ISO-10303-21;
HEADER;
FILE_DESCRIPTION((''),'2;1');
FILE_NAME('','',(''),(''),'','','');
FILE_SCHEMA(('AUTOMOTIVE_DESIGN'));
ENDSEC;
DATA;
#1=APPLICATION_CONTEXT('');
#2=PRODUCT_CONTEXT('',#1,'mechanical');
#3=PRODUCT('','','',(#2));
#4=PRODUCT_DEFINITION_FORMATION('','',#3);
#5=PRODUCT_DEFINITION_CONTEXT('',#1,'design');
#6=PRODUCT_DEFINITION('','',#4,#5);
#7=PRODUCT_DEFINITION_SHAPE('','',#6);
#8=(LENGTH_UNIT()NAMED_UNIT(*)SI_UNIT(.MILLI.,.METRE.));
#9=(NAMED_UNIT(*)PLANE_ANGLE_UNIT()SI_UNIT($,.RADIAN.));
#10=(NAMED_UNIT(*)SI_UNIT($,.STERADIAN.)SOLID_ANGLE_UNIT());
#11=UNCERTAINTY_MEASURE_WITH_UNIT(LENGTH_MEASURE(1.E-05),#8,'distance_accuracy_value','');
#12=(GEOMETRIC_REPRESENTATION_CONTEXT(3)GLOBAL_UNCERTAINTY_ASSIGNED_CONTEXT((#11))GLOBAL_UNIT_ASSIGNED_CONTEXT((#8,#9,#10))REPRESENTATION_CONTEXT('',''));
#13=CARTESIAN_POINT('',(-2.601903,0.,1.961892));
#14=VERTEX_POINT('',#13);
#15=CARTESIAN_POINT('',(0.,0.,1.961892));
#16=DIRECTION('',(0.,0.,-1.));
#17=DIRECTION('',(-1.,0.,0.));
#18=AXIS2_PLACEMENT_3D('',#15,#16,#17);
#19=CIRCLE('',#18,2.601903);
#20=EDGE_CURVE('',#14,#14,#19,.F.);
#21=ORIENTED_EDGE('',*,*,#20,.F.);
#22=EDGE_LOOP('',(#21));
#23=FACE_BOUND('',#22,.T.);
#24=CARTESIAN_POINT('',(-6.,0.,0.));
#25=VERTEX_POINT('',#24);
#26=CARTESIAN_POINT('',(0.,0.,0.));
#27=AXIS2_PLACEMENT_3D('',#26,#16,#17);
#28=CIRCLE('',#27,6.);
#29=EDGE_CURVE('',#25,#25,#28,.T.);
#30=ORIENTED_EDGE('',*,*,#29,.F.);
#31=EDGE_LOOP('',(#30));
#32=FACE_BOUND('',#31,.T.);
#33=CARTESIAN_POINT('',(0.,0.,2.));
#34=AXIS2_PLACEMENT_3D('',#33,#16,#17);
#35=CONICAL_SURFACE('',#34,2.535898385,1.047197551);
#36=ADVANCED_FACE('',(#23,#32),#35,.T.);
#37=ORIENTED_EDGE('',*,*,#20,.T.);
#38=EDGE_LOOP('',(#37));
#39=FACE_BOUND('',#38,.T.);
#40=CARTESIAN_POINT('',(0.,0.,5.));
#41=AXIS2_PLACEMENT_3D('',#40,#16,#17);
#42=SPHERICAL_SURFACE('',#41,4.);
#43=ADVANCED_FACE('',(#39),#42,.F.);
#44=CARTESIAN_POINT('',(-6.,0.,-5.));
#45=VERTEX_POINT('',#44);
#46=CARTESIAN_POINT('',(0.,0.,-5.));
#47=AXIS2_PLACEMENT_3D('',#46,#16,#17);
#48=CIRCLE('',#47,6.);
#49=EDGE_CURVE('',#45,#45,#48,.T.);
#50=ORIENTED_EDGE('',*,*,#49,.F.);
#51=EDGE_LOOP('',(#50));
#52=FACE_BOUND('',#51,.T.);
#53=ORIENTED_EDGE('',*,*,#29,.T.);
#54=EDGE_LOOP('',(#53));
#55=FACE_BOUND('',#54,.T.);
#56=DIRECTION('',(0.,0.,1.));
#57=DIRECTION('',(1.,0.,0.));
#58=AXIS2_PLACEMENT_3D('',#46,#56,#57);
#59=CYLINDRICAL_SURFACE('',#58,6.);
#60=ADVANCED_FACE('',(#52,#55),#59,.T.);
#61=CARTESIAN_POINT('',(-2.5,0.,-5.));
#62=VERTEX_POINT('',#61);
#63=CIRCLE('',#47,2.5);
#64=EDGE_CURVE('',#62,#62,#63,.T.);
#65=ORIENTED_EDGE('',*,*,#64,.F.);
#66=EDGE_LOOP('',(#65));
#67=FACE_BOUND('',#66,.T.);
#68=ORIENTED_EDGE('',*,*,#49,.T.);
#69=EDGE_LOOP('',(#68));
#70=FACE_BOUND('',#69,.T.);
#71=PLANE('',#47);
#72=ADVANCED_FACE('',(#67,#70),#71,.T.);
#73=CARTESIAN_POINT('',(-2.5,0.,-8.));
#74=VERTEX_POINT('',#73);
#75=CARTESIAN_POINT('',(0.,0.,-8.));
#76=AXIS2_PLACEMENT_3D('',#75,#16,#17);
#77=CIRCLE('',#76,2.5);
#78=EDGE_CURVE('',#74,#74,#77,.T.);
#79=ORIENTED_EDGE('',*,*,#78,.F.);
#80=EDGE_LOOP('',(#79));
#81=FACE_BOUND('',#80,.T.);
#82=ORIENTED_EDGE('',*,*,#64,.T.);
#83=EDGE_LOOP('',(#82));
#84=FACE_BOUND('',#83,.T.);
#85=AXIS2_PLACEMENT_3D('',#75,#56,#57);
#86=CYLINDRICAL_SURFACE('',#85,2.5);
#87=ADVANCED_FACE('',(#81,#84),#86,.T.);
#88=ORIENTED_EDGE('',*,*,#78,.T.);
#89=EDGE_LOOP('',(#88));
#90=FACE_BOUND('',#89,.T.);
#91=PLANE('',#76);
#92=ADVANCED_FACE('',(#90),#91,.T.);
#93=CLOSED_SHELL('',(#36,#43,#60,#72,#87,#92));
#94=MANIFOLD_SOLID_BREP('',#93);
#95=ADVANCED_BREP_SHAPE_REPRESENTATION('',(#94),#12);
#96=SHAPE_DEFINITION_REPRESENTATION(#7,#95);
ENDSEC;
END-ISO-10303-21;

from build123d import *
from build123d.topology import SkipClean

# Parameters (mm, degrees)
SKETCH2_R           = 6
BOSS_EXTRUDE1_DEPTH = 2
CHAMFER1_SIZE       = 2
CHAMFER1_SIZE_2     = 3.464101615
SKETCH4_R           = 6
BOSS_EXTRUDE2_DEPTH = 5
SKETCH6_R           = 2.5
BOSS_EXTRUDE3_DEPTH = 3


with BuildPart() as part:
    # Sketch2 → Boss-Extrude1 (new body)
    with BuildSketch(Plane.XY):
        Circle(SKETCH2_R)
    extrude(amount=BOSS_EXTRUDE1_DEPTH)

    # Sketch3 one side → Cut-Revolve1 (revolve, cut)
    with SkipClean():  # the faces are left unmerged after this step: merging them gives an invalid solid
        with BuildSketch(Plane(origin=(0, 0, 0), x_dir=(0, 0, -1), z_dir=(1, 0, 0))):
            with BuildLine():
                ThreePointArc((-5, -4), (-2.171572875, -2.828427125), (-1, 0))
                ThreePointArc((-1, 0), (-2.171572875, 2.828427125), (-5, 4))
                Line((-5, 4), (-5, -4))
            make_face()
        revolve(axis=Axis((0, 4, 5), (0, -1, 0)), mode=Mode.SUBTRACT)

    # Chamfer1
    # the kernel refuses this chamfer: 3.464101615, 2 mm, written as the material it takes off along each edge
    with BuildSketch(Plane(origin=(0, 0, 2), x_dir=(1, 0, 0), z_dir=(0, -1, 0))) as chamfer1_piece_1:
        Polygon((6, -CHAMFER1_SIZE), (6 - CHAMFER1_SIZE_2, 0), (6, 0), align=None)
    revolve(axis=Axis((0, 0, 2), (0, 0, 1)), mode=Mode.SUBTRACT)

    # Sketch4 → Boss-Extrude2 (add)
    with BuildSketch(Plane(origin=(0, 0, 0), x_dir=(-1, 0, 0), z_dir=(0, 0, -1))):
        Circle(SKETCH4_R)
    extrude(amount=BOSS_EXTRUDE2_DEPTH)

    # Sketch6 → Boss-Extrude3 (add)
    with BuildSketch(Plane(origin=(0, 0, -5), x_dir=(-1, 0, 0), z_dir=(0, 0, -1))):
        Circle(SKETCH6_R)
    extrude(amount=BOSS_EXTRUDE3_DEPTH)


solid = part.part
